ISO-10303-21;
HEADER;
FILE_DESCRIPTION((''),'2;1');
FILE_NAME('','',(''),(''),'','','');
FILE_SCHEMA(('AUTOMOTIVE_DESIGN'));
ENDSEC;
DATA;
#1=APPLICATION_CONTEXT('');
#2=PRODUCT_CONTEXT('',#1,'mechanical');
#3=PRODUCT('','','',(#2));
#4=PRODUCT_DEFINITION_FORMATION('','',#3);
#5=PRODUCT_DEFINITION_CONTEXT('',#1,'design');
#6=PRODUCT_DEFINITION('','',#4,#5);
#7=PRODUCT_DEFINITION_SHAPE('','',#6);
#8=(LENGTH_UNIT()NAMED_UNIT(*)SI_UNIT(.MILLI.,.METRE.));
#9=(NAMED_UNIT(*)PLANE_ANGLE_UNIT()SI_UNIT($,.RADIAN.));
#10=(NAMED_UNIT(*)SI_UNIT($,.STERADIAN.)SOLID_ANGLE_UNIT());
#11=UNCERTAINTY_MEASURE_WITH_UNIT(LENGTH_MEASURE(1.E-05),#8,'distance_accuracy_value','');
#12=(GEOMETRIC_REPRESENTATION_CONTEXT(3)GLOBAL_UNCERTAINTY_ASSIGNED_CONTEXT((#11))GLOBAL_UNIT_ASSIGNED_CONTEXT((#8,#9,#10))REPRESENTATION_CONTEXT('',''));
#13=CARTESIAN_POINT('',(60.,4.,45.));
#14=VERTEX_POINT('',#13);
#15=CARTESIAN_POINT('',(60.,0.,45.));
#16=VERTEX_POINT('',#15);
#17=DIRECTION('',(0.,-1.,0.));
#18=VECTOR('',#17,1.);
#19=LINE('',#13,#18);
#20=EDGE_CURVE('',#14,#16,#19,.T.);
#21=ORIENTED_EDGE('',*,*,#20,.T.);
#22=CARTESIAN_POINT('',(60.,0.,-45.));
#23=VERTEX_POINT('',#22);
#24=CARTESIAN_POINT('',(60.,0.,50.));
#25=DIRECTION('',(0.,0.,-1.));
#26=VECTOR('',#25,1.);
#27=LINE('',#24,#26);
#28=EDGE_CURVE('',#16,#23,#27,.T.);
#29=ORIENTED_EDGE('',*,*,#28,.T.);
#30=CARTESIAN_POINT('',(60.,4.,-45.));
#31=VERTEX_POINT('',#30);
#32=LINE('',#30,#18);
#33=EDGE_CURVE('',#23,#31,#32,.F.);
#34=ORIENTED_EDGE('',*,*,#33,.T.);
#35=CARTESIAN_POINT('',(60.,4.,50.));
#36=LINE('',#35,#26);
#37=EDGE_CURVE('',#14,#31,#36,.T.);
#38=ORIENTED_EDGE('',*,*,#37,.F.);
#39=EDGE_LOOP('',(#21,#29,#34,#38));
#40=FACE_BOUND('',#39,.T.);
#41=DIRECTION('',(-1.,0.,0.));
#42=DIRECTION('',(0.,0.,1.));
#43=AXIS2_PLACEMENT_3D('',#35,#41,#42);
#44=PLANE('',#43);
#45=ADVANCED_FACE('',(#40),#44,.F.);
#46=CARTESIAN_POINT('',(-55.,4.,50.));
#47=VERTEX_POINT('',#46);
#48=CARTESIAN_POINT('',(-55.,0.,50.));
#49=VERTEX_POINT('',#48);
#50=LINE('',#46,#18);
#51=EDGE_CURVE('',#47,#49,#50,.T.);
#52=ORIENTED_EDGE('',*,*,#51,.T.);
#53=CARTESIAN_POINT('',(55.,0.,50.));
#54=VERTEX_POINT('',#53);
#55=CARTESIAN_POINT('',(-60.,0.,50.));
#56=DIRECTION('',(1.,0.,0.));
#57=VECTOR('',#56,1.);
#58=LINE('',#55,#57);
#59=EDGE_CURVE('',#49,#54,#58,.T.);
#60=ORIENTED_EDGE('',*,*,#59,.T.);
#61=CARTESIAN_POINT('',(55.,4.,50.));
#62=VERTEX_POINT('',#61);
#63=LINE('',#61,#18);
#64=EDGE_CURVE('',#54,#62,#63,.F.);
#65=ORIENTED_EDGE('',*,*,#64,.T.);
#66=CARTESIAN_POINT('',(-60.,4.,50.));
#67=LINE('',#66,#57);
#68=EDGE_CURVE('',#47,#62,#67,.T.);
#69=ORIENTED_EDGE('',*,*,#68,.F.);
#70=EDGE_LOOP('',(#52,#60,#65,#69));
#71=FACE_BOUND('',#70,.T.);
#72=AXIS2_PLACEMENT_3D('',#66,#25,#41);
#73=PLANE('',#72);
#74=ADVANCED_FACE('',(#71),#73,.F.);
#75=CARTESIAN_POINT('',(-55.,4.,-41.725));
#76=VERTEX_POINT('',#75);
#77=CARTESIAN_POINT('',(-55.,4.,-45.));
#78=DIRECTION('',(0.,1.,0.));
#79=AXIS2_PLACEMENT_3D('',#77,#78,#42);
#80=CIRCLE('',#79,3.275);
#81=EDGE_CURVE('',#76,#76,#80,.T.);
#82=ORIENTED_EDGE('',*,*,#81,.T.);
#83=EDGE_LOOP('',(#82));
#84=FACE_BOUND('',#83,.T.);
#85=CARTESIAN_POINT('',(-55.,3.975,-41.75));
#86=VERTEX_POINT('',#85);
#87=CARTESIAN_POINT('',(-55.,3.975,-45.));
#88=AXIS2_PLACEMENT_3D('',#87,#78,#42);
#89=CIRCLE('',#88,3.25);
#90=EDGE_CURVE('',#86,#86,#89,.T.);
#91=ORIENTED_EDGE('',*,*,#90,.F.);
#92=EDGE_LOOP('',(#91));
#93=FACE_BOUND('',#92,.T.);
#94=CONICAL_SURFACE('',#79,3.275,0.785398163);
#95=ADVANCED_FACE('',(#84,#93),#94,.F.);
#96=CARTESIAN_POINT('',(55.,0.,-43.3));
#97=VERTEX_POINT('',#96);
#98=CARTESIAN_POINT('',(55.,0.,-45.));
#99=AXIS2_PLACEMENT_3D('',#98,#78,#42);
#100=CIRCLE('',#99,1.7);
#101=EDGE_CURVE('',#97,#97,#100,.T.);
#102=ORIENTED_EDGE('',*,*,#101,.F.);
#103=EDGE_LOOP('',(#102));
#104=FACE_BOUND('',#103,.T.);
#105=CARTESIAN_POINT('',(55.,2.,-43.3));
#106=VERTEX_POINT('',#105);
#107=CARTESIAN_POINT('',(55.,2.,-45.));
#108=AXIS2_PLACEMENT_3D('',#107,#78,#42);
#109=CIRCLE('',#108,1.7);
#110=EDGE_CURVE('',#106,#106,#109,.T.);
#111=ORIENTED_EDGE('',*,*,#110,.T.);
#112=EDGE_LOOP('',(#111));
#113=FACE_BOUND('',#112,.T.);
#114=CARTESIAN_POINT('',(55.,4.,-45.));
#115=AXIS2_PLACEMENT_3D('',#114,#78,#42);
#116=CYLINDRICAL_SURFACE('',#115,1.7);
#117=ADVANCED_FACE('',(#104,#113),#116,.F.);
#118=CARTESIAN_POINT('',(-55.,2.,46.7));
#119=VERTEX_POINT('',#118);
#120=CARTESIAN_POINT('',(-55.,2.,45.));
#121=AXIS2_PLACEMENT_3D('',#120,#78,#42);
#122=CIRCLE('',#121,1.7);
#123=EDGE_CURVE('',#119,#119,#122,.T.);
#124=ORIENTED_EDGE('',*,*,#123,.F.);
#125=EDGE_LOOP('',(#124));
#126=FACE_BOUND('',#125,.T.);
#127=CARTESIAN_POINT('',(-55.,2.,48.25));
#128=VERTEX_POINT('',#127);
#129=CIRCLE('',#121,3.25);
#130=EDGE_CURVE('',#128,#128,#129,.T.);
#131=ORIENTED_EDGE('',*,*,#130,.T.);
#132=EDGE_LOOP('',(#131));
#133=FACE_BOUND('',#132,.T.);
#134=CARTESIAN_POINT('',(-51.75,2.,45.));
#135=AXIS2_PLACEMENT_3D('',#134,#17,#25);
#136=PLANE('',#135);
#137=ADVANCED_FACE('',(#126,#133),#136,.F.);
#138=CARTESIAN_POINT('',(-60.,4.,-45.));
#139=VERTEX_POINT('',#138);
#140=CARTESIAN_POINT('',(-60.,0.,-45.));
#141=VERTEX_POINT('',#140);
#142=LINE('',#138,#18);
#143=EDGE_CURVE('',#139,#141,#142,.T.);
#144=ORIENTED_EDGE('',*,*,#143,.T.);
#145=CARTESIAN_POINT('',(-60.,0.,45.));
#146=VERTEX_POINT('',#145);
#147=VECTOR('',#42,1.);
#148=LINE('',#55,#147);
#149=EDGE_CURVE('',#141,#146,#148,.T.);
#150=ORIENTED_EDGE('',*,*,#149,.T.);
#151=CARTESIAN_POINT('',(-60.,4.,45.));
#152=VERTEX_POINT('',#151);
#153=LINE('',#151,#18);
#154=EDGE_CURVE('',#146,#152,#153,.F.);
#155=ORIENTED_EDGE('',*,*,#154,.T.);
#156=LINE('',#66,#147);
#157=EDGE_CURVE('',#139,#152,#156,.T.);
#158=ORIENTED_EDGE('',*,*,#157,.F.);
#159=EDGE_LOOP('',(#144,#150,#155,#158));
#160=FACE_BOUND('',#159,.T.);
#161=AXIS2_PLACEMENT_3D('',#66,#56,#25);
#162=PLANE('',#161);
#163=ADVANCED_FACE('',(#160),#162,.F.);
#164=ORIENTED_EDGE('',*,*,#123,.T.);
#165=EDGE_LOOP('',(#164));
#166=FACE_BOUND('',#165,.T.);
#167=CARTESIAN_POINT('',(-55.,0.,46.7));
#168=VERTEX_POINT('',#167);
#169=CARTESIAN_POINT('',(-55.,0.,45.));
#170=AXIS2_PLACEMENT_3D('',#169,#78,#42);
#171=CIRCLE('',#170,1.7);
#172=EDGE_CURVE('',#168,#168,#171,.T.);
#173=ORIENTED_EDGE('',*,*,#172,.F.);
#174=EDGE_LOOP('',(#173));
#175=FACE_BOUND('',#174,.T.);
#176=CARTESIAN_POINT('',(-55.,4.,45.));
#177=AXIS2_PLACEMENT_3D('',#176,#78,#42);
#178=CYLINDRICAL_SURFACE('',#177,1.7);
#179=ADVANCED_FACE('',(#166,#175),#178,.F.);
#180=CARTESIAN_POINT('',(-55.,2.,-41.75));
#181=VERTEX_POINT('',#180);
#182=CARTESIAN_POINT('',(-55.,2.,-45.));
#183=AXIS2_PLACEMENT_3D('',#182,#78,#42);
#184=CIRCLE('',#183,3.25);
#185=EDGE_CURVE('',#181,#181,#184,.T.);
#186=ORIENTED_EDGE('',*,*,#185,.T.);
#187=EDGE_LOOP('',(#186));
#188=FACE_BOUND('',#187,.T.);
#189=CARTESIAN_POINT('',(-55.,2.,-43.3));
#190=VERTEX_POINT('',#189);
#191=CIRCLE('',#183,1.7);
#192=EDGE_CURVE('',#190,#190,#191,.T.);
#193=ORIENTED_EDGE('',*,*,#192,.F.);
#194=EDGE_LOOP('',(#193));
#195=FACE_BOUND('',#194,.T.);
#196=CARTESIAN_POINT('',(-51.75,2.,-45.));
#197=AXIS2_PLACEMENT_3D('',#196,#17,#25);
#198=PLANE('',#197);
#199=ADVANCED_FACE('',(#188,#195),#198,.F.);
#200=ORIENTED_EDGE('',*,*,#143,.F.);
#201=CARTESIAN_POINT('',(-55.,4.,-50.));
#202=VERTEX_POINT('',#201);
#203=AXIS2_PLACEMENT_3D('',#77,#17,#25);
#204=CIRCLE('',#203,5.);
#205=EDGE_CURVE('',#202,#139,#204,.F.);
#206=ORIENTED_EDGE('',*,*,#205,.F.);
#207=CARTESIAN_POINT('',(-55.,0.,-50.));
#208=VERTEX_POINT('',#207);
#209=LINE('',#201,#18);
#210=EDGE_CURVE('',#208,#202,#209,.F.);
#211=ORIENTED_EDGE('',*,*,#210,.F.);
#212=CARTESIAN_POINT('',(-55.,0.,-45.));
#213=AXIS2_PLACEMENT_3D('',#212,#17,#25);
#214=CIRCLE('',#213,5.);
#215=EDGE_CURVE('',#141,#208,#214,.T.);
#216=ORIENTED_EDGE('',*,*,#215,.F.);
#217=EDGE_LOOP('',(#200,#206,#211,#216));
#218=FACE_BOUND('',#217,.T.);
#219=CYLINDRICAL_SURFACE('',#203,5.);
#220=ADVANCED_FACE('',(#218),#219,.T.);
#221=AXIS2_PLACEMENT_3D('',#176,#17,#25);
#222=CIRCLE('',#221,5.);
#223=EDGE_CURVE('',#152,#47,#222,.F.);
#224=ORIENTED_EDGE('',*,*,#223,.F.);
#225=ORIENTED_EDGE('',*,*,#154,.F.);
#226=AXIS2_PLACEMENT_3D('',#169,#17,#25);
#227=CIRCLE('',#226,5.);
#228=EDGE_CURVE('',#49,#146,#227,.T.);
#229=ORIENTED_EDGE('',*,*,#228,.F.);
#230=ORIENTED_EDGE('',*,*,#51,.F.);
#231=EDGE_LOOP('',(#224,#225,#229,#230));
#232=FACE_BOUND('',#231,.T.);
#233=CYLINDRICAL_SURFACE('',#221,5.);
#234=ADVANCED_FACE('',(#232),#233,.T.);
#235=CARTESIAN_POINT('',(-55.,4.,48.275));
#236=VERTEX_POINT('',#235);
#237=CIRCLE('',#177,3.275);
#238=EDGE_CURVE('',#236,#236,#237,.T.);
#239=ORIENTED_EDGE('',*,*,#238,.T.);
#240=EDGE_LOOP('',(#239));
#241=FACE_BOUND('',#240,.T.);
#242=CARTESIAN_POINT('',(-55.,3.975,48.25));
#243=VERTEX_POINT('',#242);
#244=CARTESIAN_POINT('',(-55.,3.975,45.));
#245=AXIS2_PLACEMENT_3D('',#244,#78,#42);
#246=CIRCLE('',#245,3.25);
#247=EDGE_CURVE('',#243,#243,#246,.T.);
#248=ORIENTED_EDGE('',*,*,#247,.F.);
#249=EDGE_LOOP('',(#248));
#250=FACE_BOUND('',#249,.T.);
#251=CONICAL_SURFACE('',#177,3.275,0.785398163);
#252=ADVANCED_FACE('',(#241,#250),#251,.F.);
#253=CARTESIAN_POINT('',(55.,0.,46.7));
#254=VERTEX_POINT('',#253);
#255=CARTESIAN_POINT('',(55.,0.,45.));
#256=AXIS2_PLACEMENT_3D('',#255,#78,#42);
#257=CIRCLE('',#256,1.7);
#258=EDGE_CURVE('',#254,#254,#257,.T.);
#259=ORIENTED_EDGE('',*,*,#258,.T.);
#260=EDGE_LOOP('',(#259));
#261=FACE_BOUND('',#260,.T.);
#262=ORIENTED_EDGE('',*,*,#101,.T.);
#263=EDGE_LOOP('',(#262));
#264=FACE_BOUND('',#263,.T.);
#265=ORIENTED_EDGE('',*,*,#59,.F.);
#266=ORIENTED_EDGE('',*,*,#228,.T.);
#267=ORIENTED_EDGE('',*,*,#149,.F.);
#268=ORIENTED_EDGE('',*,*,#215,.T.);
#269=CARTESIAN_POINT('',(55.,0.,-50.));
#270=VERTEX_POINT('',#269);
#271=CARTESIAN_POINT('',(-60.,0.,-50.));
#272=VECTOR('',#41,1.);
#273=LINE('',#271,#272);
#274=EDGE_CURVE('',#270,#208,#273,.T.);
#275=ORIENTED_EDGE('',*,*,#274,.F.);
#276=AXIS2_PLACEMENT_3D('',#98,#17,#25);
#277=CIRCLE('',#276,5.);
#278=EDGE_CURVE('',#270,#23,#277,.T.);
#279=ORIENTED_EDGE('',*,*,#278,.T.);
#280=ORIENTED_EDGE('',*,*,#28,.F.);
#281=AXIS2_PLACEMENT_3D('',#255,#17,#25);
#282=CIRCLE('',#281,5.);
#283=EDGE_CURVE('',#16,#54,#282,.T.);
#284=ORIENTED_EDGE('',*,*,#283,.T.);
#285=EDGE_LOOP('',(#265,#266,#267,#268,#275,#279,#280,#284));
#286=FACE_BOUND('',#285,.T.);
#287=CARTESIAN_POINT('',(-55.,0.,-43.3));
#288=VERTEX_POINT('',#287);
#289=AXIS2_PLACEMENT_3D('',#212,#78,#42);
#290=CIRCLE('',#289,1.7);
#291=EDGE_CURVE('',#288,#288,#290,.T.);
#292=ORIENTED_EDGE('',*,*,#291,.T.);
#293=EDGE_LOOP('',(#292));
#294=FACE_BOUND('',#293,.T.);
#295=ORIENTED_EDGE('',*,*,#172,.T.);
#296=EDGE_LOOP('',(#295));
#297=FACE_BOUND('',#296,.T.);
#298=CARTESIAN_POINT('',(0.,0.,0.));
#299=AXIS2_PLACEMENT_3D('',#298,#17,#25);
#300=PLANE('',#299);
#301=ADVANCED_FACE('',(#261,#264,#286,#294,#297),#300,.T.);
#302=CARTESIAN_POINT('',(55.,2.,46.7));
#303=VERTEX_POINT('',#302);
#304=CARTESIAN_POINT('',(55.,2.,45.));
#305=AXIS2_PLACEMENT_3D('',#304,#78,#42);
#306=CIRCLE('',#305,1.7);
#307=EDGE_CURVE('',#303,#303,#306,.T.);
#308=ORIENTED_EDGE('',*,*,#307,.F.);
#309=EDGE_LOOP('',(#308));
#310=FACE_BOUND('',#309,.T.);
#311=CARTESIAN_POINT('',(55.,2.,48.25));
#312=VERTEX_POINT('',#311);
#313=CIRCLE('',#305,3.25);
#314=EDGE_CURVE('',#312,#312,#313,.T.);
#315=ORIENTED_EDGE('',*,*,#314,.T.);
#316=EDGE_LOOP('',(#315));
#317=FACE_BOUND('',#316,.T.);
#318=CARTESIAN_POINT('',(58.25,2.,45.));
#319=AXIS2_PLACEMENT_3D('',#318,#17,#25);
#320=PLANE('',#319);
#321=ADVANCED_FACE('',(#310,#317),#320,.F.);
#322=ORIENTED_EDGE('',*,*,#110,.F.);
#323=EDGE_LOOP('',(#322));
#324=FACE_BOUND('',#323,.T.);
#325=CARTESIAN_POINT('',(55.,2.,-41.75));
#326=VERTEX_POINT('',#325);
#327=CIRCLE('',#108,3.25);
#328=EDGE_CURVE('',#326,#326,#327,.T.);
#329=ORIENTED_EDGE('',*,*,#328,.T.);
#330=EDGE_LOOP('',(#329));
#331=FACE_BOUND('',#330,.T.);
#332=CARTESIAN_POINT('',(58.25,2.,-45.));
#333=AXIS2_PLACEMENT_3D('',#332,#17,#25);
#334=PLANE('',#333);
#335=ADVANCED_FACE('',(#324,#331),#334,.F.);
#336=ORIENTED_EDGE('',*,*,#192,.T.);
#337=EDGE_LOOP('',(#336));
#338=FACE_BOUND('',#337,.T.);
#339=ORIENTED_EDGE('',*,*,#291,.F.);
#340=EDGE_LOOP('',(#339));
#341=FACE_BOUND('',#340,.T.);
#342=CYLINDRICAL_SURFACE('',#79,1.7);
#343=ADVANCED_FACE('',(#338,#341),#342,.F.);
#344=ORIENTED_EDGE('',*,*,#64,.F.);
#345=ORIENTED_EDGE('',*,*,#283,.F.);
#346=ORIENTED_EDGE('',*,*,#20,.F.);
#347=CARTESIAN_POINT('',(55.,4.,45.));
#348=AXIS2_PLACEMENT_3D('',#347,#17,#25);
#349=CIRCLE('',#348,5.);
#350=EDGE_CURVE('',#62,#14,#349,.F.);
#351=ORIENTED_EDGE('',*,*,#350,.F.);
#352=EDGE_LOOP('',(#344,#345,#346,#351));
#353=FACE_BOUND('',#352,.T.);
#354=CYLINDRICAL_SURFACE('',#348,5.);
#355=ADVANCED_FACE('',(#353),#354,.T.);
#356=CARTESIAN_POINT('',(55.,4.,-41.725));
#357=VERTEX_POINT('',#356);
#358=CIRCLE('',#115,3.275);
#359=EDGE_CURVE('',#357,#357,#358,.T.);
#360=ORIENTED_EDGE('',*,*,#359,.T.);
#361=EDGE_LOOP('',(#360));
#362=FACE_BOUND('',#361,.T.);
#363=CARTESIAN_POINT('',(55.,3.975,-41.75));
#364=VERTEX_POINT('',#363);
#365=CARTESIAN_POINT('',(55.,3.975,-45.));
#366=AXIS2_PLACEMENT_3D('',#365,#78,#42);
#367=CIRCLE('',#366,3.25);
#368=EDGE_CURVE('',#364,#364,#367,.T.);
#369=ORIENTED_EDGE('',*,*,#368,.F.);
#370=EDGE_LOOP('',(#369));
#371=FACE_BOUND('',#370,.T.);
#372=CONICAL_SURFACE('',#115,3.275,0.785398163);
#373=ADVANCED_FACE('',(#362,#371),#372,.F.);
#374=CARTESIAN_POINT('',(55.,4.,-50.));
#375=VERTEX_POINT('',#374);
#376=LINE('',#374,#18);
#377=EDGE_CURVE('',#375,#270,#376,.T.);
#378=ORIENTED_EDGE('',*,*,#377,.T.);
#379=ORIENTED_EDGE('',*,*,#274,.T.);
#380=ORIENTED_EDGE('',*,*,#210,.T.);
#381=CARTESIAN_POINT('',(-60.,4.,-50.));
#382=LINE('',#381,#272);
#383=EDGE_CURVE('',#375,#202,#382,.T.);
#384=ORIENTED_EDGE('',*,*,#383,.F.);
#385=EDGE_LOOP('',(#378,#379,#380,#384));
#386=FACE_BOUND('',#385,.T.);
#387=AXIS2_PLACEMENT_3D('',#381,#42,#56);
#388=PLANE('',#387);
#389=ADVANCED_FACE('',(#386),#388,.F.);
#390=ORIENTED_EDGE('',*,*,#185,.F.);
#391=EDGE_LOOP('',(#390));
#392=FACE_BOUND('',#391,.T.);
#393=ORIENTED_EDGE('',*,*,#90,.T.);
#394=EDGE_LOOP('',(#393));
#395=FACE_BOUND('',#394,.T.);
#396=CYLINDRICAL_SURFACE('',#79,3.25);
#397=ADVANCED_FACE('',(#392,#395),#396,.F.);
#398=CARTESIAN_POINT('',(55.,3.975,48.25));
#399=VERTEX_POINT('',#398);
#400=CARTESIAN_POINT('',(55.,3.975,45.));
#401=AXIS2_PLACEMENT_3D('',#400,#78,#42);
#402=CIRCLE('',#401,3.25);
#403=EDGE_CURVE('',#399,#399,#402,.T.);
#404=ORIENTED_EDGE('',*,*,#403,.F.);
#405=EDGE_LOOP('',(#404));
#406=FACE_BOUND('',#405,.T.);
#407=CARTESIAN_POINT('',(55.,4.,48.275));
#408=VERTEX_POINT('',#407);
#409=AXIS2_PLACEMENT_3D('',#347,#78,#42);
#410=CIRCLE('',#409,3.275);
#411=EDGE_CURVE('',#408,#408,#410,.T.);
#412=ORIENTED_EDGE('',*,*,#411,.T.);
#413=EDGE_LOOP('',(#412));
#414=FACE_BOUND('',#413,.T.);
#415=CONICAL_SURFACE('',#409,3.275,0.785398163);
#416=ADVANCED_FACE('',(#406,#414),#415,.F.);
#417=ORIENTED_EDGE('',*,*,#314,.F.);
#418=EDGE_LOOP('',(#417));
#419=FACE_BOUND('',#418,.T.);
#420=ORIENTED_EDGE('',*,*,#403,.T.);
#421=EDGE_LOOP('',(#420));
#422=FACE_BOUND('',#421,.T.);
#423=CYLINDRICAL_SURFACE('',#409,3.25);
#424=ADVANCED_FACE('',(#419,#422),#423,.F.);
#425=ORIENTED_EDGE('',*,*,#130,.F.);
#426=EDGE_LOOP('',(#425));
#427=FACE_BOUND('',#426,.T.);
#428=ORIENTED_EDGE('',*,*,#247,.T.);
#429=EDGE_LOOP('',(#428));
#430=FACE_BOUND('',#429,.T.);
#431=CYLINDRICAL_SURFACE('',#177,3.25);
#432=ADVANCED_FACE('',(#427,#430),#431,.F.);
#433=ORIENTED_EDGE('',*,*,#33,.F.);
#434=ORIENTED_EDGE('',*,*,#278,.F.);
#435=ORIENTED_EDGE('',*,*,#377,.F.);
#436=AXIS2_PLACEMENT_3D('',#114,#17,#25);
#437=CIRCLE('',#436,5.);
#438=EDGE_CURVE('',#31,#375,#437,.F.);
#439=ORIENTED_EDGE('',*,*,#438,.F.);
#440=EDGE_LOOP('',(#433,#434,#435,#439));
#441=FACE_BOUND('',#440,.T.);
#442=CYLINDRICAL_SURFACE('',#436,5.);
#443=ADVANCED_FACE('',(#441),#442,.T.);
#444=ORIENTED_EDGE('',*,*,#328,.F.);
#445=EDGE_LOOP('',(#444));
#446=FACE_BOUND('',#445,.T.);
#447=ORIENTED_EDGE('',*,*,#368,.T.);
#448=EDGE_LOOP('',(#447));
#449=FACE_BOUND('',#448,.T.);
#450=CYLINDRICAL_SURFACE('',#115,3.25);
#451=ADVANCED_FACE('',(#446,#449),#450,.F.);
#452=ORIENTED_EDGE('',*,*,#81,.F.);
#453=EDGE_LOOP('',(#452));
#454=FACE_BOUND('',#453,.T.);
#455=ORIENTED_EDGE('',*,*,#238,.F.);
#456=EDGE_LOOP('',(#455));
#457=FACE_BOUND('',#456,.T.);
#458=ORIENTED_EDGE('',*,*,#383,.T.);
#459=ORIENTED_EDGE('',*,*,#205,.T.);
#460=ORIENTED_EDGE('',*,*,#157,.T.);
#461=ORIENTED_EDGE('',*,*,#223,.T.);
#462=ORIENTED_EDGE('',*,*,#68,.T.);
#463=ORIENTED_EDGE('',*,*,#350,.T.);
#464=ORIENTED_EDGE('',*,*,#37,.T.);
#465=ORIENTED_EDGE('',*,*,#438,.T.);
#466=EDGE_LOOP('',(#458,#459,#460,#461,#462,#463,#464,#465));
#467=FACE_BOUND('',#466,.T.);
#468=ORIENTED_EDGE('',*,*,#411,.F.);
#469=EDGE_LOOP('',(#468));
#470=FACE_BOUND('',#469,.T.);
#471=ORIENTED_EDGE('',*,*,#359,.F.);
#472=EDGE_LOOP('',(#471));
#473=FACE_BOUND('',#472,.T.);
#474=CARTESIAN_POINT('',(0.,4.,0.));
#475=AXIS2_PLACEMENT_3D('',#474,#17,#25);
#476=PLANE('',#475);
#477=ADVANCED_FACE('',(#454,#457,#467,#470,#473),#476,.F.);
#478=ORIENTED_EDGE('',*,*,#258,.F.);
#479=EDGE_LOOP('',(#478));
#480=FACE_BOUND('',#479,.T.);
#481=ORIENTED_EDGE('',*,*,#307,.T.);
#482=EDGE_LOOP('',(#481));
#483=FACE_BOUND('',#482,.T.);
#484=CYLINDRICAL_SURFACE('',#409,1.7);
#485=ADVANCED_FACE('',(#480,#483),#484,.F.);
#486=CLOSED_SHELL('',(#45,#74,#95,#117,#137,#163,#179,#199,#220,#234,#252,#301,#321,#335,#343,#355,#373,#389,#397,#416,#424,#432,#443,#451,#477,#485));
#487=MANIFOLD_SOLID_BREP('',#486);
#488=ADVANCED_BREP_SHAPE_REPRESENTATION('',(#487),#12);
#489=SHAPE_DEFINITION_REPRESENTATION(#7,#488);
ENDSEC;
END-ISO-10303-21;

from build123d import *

# Parameters (mm, degrees)
SKETCH1_W      = 120
SKETCH1_H      = 100
BODY_DEPTH     = 4
EDGE_FILLETS_R = 5


# Read off the part's stored shape, not the designer's step: mounting_holes
with BuildPart() as part:
    # Sketch1 → body (new body)
    with BuildSketch(Plane(origin=(0, 0, 0), x_dir=(1, 0, 0), z_dir=(0, 1, 0))):
        Rectangle(SKETCH1_W, SKETCH1_H)
    extrude(amount=BODY_DEPTH)

    # mounting_holes outline → mounting_holes (revolve, cut)
    with BuildSketch(Plane(origin=(55, 0, 45), x_dir=(1, 0, 0), z_dir=(0, 0, 1))):
        Polygon((0, 0), (1.7, 0), (1.7, 2), (3.25, 2), (3.25, 3.975), (3.275, 4), (0, 4), align=None)
    revolve(axis=Axis((55, 0, 45), (0, 1, 0)), mode=Mode.SUBTRACT)

    # mounting_holes 2 outline → mounting_holes 2 (revolve, cut)
    with BuildSketch(Plane(origin=(-55, 0, -45), x_dir=(1, 0, 0), z_dir=(0, 0, 1))):
        Polygon((0, 4), (0, 0), (1.7, 0), (1.7, 2), (3.25, 2), (3.25, 3.975), (3.275, 4), align=None)
    revolve(axis=Axis((-55, 0, -45), (0, 1, 0)), mode=Mode.SUBTRACT)

    # mounting_holes 3 outline → mounting_holes 3 (revolve, cut)
    with BuildSketch(Plane(origin=(55, 0, -45), x_dir=(1, 0, 0), z_dir=(0, 0, 1))):
        Polygon((0, 4), (0, 0), (1.7, 0), (1.7, 2), (3.25, 2), (3.25, 3.975), (3.275, 4), align=None)
    revolve(axis=Axis((55, 0, -45), (0, 1, 0)), mode=Mode.SUBTRACT)

    # mounting_holes 4 outline → mounting_holes 4 (revolve, cut)
    with BuildSketch(Plane(origin=(-55, 0, 45), x_dir=(1, 0, 0), z_dir=(0, 0, 1))):
        Polygon((0, 4), (0, 0), (1.7, 0), (1.7, 2), (3.25, 2), (3.25, 3.975), (3.275, 4), align=None)
    revolve(axis=Axis((-55, 0, 45), (0, 1, 0)), mode=Mode.SUBTRACT)

    # edge_fillets
    edge_fillets_edges = [part.edges().sort_by_distance(p)[0] for p in [
        (60, 2, 50),
        (-60, 2, 50),
        (-60, 2, -50),
        (60, 2, -50),
    ]]
    fillet(edge_fillets_edges, radius=EDGE_FILLETS_R)


solid = part.part
